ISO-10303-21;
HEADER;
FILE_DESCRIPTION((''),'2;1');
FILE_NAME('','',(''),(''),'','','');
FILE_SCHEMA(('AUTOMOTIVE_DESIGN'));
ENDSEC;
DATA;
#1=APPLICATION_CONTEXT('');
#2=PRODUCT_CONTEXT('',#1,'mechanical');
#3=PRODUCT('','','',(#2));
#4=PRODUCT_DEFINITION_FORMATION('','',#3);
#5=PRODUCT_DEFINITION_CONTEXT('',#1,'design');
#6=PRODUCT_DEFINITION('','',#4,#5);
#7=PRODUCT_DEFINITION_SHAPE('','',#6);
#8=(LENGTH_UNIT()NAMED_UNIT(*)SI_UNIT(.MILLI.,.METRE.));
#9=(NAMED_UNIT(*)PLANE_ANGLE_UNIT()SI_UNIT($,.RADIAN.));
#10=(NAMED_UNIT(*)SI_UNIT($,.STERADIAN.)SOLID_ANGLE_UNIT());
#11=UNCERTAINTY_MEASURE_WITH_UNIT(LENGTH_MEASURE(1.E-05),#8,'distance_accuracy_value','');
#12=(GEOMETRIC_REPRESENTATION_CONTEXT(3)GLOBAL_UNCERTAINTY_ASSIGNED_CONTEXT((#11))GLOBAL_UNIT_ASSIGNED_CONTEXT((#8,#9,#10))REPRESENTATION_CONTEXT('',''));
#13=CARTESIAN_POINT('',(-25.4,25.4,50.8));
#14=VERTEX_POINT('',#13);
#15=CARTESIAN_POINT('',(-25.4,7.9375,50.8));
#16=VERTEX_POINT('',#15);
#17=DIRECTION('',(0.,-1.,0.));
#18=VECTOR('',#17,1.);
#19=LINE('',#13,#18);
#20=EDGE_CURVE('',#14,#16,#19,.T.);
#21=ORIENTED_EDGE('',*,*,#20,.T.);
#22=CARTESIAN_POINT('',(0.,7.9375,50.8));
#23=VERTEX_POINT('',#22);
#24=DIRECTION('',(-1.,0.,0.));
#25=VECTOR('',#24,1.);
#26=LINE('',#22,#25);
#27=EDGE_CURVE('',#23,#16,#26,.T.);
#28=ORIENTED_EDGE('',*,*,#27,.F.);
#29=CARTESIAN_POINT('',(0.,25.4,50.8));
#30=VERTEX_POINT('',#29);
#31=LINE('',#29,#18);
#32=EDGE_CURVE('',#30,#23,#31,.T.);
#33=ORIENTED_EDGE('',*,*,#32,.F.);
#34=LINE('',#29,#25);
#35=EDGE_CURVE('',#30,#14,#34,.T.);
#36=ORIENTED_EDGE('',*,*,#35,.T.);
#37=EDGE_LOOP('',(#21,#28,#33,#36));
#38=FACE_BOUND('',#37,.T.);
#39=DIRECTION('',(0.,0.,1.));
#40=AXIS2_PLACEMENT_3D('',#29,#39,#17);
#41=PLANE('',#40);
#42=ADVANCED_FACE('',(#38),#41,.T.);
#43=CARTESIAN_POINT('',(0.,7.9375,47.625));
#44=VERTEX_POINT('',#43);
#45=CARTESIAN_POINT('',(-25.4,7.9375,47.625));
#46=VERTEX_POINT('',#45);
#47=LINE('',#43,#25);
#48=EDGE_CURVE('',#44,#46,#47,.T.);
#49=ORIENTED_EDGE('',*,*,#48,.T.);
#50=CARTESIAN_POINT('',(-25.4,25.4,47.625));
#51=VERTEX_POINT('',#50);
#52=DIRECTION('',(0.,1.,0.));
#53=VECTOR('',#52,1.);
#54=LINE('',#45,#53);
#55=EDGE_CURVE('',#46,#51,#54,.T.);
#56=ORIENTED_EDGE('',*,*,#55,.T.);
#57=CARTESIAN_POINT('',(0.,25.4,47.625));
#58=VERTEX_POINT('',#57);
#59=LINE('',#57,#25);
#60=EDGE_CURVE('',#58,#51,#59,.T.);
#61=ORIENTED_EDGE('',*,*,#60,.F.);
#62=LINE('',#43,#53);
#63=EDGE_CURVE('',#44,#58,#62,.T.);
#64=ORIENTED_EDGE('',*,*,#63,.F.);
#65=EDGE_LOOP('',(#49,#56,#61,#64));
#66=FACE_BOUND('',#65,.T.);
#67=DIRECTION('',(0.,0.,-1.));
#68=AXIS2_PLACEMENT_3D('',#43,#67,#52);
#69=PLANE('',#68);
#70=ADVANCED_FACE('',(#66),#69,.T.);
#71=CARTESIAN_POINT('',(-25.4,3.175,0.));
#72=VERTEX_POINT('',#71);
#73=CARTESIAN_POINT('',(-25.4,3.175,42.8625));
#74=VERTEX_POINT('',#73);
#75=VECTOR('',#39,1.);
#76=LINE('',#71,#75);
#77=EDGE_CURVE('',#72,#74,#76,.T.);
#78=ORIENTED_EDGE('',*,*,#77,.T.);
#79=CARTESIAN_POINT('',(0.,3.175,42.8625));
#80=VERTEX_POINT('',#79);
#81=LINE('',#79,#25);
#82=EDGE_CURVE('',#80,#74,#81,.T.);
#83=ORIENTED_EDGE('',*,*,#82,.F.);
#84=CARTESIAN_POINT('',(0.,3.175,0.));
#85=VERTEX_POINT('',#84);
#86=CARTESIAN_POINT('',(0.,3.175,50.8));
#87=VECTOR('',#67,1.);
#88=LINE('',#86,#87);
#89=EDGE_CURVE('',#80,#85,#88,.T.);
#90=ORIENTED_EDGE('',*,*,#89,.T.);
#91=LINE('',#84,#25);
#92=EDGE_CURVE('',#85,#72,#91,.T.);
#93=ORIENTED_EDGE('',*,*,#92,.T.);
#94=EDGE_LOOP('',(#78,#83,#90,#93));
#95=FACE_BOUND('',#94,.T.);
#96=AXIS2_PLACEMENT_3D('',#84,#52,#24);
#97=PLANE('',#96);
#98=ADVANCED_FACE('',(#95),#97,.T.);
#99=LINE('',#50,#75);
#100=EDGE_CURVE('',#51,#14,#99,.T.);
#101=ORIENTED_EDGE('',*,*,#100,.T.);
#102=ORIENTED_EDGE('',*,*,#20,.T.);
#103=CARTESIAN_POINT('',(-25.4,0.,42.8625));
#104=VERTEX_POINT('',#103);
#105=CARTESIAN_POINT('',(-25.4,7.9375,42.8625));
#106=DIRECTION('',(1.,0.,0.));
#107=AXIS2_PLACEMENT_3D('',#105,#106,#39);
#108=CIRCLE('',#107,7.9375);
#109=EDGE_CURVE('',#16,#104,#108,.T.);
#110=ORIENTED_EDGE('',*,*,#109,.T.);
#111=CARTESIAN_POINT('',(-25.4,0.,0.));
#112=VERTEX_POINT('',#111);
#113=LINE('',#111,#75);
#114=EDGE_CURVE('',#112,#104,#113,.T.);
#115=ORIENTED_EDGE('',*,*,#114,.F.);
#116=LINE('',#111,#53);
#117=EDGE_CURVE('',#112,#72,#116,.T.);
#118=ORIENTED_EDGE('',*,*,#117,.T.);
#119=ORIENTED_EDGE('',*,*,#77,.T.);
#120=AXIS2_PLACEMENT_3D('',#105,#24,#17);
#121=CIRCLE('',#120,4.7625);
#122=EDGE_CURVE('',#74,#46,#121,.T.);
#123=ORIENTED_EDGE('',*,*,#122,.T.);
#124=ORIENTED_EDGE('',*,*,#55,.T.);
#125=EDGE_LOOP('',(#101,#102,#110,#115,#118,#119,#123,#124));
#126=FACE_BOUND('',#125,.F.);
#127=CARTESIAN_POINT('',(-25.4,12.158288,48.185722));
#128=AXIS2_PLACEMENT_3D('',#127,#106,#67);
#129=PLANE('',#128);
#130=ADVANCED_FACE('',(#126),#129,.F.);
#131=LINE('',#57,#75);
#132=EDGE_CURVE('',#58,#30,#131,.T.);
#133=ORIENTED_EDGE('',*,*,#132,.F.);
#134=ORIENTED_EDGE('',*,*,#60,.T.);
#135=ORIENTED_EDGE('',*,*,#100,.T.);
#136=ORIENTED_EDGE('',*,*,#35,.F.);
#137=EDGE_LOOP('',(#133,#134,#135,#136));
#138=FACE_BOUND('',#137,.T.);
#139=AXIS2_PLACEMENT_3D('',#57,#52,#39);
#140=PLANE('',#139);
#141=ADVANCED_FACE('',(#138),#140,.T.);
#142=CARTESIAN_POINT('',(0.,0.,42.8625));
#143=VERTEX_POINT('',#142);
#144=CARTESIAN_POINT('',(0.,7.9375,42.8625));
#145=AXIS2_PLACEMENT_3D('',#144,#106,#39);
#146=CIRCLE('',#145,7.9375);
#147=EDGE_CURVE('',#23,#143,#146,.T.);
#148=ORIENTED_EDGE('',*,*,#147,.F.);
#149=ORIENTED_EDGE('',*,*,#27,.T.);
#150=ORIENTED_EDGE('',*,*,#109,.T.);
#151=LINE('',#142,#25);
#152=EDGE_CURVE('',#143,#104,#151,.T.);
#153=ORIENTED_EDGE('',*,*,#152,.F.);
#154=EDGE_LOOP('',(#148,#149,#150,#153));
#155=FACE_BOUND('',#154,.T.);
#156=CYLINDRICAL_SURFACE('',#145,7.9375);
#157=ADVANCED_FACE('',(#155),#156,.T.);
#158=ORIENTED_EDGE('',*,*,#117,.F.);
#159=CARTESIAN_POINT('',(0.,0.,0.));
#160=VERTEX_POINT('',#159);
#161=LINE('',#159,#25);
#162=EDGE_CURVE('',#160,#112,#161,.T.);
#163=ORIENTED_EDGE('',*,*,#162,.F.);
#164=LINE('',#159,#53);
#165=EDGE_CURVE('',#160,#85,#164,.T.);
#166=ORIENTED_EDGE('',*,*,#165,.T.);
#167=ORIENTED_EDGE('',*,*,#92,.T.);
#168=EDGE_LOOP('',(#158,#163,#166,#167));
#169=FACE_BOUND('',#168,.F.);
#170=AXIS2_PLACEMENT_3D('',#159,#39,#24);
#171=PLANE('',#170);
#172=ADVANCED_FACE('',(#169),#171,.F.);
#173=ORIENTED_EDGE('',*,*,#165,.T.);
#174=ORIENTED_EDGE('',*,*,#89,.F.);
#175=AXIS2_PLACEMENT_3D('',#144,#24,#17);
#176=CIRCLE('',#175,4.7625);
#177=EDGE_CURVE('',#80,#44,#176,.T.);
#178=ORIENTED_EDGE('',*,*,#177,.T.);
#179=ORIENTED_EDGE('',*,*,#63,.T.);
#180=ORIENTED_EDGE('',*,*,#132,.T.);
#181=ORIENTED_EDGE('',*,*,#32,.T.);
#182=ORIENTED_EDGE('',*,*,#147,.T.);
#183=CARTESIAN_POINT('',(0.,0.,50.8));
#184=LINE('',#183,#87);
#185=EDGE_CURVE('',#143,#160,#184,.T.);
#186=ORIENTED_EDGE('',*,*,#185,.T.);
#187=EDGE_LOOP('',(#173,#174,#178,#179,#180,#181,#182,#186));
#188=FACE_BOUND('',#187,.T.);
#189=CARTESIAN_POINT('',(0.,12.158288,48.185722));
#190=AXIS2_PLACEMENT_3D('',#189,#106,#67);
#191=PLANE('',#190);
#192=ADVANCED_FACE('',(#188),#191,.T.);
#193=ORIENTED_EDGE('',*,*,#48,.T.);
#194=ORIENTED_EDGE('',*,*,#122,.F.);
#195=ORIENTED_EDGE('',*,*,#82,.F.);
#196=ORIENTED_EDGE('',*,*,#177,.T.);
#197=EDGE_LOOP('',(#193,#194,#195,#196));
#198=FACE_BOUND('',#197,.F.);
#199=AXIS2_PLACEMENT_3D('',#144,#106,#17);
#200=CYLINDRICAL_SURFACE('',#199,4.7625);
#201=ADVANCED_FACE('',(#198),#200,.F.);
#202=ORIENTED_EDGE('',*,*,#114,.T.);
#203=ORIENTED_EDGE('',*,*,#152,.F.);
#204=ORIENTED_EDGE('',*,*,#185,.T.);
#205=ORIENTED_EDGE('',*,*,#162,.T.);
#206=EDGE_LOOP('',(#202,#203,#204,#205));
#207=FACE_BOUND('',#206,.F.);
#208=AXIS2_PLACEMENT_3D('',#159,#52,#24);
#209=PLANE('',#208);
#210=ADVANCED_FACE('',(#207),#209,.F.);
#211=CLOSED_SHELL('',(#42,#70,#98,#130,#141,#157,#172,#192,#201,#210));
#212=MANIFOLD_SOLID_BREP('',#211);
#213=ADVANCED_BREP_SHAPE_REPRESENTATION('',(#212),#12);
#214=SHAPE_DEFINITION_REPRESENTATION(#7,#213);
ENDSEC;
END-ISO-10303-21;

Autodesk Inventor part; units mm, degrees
ref_plane "YZ Plane" through (0, 0, 0) normal (1, 0, 0) x (0, 1, 0)
ref_plane "XZ Plane" through (0, 0, 0) normal (0, 1, 0) x (-1, 0, 0)
ref_plane "XY Plane" through (0, 0, 0) normal (0, 0, 1) x (1, 0, 0)
sketch "Sketch1" plane through (0, 0, 0) normal (0, 1, 0) x (-1, 0, 0)
  line L0 (0, 0) -> (25.4, 0)
  line L1 (25.4, 0) -> (25.4, 50.8)
  line L2 (25.4, 50.8) -> (0, 50.8)
  line L3 (0, 50.8) -> (0, 0)
  dimension "d0" = 25.4
  dimension "d1" = 50.8
extrude "Plate1" add sketch "Sketch1" along normal blind 3.175
sketch "Sketch2" plane through (0, 0, 47.625) normal (0, 0, 1) x (1, 0, 0)
  line L0 (-25.4, 0) -> (0, 0)
  line L1 (0, 0) -> (0, 25.4)
  line L2 (0, 25.4) -> (-25.4, 25.4)
  line L3 (-25.4, 25.4) -> (-25.4, 0)
edge flange "Flange1" height 25.4 angle 90 thickness 3.175 bend radius 4.7625 thickness toward (0, 0, 1) relief tear relief width 3.175 relief depth 1.5875 edges at (-12.7, 3.175, 50.8) wall of the first edge with corners at (-25.4, 0, 47.625) (0, 0, 47.625) (0, 25.4, 47.625) (-25.4, 25.4, 47.625)
bend "Bend1"
corner "Corner1"
equation "\"d2\" = Thickness"
equation "\"d3\" = BendReliefWidth"
equation "\"d4\" = BendReliefDepth"
equation "\"d5\" = MinimumRemnant"
equation "\"d6\" = TransitionRadius"
equation "\"d9\" = BendRadius"
equation "\"d10\" = CornerReliefSize"
equation "\"d11\" = GapSize"
equation "\"d12\" = JacobiRadiusSize"
equation "\"BendRadius\" = 1.5 * Thickness"
equation "\"BendReliefWidth\" = Thickness"
equation "\"BendReliefDepth\" = 0.5 * Thickness"
equation "\"CornerReliefSize\" = 4 * Thickness"
equation "\"MinimumRemnant\" = 2 * Thickness"
equation "\"TransitionRadius\" = BendRadius"
equation "\"JacobiRadiusSize\" = BendRadius"
equation "\"GapSize\" = Thickness"
equation "\"Thickness\" = 3.175"
properties part number "200557" material "Aluminum 5052 H32"
